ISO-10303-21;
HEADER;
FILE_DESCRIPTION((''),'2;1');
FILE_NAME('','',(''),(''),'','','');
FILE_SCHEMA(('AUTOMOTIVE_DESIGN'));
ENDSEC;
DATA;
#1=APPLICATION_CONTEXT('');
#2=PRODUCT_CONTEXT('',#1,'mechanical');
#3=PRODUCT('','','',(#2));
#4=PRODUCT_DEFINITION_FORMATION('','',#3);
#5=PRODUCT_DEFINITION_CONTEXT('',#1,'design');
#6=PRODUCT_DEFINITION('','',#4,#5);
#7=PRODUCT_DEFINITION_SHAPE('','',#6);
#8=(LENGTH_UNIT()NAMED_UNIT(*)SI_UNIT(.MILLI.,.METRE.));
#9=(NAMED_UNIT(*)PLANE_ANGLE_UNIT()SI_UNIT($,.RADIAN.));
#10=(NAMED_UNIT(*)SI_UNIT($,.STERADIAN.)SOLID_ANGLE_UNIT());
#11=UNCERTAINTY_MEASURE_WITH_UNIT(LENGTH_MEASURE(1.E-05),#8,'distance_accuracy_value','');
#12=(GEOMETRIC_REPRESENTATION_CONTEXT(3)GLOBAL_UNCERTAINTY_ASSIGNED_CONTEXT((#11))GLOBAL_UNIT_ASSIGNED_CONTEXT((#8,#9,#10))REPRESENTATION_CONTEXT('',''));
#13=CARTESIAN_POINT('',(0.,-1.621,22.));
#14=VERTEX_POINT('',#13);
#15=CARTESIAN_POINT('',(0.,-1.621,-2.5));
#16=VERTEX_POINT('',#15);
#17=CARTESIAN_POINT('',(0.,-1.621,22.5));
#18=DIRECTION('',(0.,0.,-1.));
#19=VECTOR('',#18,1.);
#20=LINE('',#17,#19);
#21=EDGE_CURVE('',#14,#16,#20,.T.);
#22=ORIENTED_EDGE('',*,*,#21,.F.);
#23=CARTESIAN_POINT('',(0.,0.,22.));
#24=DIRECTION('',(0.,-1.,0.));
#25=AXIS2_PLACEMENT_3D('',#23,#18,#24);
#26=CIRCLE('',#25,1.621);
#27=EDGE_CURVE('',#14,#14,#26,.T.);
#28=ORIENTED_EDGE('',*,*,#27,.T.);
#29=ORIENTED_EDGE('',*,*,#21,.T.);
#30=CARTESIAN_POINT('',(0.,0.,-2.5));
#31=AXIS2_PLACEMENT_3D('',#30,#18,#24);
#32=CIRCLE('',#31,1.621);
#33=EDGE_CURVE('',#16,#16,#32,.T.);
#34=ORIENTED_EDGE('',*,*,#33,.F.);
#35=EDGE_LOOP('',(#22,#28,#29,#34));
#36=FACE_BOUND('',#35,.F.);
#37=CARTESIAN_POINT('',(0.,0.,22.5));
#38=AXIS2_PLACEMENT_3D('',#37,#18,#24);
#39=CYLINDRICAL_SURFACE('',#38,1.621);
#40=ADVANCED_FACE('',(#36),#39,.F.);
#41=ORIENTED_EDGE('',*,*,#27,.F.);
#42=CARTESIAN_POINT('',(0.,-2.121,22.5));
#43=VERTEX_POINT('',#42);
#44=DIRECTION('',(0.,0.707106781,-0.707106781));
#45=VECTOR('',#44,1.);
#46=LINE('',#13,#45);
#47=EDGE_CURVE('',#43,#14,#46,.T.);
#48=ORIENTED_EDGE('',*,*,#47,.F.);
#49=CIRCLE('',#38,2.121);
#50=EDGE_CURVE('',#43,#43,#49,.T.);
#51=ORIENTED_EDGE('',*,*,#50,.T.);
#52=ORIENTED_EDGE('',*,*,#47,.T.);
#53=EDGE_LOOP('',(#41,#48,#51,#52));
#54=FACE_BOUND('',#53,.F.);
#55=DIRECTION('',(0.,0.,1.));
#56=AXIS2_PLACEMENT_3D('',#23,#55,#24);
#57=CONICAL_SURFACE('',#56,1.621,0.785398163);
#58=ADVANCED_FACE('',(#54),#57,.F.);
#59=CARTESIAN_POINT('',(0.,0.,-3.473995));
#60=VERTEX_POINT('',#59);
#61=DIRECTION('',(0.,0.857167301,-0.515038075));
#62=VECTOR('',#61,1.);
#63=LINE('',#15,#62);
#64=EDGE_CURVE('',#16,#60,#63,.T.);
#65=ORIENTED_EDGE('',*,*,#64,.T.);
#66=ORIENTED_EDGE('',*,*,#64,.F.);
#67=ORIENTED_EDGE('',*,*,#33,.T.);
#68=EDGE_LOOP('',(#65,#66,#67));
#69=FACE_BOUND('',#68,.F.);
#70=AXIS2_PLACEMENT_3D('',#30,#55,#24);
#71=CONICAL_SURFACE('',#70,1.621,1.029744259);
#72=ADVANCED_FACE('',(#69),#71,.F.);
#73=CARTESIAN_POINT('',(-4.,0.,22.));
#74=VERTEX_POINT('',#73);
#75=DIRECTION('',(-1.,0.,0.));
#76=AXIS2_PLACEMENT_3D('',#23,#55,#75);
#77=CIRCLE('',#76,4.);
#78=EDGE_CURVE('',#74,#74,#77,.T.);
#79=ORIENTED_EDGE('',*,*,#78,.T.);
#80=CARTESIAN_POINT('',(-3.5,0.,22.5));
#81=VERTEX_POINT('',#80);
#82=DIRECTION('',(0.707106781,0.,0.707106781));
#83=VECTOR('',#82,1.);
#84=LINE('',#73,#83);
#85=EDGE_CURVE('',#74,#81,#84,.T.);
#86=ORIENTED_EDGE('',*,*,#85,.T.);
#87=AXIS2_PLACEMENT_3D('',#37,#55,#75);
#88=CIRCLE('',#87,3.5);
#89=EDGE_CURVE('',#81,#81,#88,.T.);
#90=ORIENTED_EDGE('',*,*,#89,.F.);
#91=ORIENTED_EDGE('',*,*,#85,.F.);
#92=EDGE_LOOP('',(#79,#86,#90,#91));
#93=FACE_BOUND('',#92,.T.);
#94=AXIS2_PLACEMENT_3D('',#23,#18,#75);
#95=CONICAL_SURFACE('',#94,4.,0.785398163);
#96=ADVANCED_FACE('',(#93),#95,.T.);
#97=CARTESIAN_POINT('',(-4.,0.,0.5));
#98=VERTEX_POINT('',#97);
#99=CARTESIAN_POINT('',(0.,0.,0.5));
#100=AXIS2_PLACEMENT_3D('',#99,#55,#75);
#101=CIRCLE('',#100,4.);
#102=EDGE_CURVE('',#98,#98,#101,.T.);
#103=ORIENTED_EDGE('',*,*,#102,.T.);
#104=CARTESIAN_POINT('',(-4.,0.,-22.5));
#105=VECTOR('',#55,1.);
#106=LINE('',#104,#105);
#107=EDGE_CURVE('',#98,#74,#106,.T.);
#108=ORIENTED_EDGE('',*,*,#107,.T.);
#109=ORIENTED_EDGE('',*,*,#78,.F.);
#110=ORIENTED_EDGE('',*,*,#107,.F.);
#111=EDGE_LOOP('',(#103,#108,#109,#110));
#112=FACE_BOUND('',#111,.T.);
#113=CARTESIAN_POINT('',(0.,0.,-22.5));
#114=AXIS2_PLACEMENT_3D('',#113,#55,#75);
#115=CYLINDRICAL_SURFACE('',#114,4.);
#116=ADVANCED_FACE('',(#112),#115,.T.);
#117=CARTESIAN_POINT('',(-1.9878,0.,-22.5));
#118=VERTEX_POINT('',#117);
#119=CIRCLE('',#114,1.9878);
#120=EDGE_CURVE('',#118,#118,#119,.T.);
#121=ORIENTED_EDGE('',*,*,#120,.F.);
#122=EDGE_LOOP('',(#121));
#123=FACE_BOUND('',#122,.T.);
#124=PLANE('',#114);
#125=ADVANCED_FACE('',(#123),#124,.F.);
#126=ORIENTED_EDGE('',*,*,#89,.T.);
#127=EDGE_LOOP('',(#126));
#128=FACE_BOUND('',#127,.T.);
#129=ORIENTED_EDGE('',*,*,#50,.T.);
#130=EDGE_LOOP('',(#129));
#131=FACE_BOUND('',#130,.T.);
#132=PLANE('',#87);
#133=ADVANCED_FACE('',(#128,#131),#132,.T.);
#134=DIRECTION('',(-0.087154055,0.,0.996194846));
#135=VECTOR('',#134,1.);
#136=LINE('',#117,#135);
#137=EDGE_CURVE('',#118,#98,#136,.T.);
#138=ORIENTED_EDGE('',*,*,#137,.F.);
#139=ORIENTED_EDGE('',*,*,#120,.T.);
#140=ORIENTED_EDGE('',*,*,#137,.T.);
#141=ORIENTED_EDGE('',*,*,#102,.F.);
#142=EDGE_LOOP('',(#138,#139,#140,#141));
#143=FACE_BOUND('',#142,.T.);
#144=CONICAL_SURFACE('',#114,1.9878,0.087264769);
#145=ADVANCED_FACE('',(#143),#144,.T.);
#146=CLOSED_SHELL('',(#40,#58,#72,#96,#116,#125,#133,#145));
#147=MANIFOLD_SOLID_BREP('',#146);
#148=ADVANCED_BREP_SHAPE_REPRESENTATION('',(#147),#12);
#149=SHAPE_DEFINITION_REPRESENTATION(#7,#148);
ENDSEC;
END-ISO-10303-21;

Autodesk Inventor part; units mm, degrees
ref_plane "YZ Plane" through (0, 0, 0) normal (1, 0, 0) x (0, 1, 0)
ref_plane "XZ Plane" through (0, 0, 0) normal (0, 1, 0) x (-1, 0, 0)
ref_plane "XY Plane" through (0, 0, 0) normal (0, 0, 1) x (1, 0, 0)
sketch "Sketch1" plane through (0, 0, 0) normal (0, 1, 0) x (-1, 0, 0)
  line L0 (4.8, 0) -> (-0.8, 0) construction
  line L1 (0, -37.7337) -> (0, 68.9023) construction
  line L2 (4, 22.5) -> (0, 22.5)
  line L3 (0, 22.5) -> (0, -22.5)
  line L4 (0, -22.5) -> (4, -22.5)
  line L5 (4, -22.5) -> (4, 22.5)
  line L6 (4, 53.6686) -> (4, 38.3314)
  line L7 (1.9878, -22.5) -> (4, 0.5)
  point P0 (0, 0)
  point P1 (0, 22.5)
  point P2 (0, -22.5)
  dimension "d2" = 8
  dimension "d5" = 23
  dimension "d21" = 45
  dimension "d22" = 3.9755
  dimension "d23" = 5
revolve "Revolution1" add sketch "Sketch1" angle 360 about axis through (0, 0, -10) along (0, 0, 1) contours L5 L7 L4 L3 L2
sketch "Sketch2" plane through (0, 0, 22.5) normal (0, 0, 1) x (1, 0, 0)
  circle A0 centre (0, 0) radius 4 projected
hole "Hole1" at (0, 0, 22.5) direction (0, 0, -1) diameter 3.242 depth 25 tip angle 118 thread size "M4x0.7" class "6H" standard "ISO Metric profile"
chamfer "Chamfer1" distance 0.5 angle 45 2 edges at (4, 0, 22.5) (0, 1.621, 22.5)
properties part number "DLT-01-238B" material "Poliacetal WT"
